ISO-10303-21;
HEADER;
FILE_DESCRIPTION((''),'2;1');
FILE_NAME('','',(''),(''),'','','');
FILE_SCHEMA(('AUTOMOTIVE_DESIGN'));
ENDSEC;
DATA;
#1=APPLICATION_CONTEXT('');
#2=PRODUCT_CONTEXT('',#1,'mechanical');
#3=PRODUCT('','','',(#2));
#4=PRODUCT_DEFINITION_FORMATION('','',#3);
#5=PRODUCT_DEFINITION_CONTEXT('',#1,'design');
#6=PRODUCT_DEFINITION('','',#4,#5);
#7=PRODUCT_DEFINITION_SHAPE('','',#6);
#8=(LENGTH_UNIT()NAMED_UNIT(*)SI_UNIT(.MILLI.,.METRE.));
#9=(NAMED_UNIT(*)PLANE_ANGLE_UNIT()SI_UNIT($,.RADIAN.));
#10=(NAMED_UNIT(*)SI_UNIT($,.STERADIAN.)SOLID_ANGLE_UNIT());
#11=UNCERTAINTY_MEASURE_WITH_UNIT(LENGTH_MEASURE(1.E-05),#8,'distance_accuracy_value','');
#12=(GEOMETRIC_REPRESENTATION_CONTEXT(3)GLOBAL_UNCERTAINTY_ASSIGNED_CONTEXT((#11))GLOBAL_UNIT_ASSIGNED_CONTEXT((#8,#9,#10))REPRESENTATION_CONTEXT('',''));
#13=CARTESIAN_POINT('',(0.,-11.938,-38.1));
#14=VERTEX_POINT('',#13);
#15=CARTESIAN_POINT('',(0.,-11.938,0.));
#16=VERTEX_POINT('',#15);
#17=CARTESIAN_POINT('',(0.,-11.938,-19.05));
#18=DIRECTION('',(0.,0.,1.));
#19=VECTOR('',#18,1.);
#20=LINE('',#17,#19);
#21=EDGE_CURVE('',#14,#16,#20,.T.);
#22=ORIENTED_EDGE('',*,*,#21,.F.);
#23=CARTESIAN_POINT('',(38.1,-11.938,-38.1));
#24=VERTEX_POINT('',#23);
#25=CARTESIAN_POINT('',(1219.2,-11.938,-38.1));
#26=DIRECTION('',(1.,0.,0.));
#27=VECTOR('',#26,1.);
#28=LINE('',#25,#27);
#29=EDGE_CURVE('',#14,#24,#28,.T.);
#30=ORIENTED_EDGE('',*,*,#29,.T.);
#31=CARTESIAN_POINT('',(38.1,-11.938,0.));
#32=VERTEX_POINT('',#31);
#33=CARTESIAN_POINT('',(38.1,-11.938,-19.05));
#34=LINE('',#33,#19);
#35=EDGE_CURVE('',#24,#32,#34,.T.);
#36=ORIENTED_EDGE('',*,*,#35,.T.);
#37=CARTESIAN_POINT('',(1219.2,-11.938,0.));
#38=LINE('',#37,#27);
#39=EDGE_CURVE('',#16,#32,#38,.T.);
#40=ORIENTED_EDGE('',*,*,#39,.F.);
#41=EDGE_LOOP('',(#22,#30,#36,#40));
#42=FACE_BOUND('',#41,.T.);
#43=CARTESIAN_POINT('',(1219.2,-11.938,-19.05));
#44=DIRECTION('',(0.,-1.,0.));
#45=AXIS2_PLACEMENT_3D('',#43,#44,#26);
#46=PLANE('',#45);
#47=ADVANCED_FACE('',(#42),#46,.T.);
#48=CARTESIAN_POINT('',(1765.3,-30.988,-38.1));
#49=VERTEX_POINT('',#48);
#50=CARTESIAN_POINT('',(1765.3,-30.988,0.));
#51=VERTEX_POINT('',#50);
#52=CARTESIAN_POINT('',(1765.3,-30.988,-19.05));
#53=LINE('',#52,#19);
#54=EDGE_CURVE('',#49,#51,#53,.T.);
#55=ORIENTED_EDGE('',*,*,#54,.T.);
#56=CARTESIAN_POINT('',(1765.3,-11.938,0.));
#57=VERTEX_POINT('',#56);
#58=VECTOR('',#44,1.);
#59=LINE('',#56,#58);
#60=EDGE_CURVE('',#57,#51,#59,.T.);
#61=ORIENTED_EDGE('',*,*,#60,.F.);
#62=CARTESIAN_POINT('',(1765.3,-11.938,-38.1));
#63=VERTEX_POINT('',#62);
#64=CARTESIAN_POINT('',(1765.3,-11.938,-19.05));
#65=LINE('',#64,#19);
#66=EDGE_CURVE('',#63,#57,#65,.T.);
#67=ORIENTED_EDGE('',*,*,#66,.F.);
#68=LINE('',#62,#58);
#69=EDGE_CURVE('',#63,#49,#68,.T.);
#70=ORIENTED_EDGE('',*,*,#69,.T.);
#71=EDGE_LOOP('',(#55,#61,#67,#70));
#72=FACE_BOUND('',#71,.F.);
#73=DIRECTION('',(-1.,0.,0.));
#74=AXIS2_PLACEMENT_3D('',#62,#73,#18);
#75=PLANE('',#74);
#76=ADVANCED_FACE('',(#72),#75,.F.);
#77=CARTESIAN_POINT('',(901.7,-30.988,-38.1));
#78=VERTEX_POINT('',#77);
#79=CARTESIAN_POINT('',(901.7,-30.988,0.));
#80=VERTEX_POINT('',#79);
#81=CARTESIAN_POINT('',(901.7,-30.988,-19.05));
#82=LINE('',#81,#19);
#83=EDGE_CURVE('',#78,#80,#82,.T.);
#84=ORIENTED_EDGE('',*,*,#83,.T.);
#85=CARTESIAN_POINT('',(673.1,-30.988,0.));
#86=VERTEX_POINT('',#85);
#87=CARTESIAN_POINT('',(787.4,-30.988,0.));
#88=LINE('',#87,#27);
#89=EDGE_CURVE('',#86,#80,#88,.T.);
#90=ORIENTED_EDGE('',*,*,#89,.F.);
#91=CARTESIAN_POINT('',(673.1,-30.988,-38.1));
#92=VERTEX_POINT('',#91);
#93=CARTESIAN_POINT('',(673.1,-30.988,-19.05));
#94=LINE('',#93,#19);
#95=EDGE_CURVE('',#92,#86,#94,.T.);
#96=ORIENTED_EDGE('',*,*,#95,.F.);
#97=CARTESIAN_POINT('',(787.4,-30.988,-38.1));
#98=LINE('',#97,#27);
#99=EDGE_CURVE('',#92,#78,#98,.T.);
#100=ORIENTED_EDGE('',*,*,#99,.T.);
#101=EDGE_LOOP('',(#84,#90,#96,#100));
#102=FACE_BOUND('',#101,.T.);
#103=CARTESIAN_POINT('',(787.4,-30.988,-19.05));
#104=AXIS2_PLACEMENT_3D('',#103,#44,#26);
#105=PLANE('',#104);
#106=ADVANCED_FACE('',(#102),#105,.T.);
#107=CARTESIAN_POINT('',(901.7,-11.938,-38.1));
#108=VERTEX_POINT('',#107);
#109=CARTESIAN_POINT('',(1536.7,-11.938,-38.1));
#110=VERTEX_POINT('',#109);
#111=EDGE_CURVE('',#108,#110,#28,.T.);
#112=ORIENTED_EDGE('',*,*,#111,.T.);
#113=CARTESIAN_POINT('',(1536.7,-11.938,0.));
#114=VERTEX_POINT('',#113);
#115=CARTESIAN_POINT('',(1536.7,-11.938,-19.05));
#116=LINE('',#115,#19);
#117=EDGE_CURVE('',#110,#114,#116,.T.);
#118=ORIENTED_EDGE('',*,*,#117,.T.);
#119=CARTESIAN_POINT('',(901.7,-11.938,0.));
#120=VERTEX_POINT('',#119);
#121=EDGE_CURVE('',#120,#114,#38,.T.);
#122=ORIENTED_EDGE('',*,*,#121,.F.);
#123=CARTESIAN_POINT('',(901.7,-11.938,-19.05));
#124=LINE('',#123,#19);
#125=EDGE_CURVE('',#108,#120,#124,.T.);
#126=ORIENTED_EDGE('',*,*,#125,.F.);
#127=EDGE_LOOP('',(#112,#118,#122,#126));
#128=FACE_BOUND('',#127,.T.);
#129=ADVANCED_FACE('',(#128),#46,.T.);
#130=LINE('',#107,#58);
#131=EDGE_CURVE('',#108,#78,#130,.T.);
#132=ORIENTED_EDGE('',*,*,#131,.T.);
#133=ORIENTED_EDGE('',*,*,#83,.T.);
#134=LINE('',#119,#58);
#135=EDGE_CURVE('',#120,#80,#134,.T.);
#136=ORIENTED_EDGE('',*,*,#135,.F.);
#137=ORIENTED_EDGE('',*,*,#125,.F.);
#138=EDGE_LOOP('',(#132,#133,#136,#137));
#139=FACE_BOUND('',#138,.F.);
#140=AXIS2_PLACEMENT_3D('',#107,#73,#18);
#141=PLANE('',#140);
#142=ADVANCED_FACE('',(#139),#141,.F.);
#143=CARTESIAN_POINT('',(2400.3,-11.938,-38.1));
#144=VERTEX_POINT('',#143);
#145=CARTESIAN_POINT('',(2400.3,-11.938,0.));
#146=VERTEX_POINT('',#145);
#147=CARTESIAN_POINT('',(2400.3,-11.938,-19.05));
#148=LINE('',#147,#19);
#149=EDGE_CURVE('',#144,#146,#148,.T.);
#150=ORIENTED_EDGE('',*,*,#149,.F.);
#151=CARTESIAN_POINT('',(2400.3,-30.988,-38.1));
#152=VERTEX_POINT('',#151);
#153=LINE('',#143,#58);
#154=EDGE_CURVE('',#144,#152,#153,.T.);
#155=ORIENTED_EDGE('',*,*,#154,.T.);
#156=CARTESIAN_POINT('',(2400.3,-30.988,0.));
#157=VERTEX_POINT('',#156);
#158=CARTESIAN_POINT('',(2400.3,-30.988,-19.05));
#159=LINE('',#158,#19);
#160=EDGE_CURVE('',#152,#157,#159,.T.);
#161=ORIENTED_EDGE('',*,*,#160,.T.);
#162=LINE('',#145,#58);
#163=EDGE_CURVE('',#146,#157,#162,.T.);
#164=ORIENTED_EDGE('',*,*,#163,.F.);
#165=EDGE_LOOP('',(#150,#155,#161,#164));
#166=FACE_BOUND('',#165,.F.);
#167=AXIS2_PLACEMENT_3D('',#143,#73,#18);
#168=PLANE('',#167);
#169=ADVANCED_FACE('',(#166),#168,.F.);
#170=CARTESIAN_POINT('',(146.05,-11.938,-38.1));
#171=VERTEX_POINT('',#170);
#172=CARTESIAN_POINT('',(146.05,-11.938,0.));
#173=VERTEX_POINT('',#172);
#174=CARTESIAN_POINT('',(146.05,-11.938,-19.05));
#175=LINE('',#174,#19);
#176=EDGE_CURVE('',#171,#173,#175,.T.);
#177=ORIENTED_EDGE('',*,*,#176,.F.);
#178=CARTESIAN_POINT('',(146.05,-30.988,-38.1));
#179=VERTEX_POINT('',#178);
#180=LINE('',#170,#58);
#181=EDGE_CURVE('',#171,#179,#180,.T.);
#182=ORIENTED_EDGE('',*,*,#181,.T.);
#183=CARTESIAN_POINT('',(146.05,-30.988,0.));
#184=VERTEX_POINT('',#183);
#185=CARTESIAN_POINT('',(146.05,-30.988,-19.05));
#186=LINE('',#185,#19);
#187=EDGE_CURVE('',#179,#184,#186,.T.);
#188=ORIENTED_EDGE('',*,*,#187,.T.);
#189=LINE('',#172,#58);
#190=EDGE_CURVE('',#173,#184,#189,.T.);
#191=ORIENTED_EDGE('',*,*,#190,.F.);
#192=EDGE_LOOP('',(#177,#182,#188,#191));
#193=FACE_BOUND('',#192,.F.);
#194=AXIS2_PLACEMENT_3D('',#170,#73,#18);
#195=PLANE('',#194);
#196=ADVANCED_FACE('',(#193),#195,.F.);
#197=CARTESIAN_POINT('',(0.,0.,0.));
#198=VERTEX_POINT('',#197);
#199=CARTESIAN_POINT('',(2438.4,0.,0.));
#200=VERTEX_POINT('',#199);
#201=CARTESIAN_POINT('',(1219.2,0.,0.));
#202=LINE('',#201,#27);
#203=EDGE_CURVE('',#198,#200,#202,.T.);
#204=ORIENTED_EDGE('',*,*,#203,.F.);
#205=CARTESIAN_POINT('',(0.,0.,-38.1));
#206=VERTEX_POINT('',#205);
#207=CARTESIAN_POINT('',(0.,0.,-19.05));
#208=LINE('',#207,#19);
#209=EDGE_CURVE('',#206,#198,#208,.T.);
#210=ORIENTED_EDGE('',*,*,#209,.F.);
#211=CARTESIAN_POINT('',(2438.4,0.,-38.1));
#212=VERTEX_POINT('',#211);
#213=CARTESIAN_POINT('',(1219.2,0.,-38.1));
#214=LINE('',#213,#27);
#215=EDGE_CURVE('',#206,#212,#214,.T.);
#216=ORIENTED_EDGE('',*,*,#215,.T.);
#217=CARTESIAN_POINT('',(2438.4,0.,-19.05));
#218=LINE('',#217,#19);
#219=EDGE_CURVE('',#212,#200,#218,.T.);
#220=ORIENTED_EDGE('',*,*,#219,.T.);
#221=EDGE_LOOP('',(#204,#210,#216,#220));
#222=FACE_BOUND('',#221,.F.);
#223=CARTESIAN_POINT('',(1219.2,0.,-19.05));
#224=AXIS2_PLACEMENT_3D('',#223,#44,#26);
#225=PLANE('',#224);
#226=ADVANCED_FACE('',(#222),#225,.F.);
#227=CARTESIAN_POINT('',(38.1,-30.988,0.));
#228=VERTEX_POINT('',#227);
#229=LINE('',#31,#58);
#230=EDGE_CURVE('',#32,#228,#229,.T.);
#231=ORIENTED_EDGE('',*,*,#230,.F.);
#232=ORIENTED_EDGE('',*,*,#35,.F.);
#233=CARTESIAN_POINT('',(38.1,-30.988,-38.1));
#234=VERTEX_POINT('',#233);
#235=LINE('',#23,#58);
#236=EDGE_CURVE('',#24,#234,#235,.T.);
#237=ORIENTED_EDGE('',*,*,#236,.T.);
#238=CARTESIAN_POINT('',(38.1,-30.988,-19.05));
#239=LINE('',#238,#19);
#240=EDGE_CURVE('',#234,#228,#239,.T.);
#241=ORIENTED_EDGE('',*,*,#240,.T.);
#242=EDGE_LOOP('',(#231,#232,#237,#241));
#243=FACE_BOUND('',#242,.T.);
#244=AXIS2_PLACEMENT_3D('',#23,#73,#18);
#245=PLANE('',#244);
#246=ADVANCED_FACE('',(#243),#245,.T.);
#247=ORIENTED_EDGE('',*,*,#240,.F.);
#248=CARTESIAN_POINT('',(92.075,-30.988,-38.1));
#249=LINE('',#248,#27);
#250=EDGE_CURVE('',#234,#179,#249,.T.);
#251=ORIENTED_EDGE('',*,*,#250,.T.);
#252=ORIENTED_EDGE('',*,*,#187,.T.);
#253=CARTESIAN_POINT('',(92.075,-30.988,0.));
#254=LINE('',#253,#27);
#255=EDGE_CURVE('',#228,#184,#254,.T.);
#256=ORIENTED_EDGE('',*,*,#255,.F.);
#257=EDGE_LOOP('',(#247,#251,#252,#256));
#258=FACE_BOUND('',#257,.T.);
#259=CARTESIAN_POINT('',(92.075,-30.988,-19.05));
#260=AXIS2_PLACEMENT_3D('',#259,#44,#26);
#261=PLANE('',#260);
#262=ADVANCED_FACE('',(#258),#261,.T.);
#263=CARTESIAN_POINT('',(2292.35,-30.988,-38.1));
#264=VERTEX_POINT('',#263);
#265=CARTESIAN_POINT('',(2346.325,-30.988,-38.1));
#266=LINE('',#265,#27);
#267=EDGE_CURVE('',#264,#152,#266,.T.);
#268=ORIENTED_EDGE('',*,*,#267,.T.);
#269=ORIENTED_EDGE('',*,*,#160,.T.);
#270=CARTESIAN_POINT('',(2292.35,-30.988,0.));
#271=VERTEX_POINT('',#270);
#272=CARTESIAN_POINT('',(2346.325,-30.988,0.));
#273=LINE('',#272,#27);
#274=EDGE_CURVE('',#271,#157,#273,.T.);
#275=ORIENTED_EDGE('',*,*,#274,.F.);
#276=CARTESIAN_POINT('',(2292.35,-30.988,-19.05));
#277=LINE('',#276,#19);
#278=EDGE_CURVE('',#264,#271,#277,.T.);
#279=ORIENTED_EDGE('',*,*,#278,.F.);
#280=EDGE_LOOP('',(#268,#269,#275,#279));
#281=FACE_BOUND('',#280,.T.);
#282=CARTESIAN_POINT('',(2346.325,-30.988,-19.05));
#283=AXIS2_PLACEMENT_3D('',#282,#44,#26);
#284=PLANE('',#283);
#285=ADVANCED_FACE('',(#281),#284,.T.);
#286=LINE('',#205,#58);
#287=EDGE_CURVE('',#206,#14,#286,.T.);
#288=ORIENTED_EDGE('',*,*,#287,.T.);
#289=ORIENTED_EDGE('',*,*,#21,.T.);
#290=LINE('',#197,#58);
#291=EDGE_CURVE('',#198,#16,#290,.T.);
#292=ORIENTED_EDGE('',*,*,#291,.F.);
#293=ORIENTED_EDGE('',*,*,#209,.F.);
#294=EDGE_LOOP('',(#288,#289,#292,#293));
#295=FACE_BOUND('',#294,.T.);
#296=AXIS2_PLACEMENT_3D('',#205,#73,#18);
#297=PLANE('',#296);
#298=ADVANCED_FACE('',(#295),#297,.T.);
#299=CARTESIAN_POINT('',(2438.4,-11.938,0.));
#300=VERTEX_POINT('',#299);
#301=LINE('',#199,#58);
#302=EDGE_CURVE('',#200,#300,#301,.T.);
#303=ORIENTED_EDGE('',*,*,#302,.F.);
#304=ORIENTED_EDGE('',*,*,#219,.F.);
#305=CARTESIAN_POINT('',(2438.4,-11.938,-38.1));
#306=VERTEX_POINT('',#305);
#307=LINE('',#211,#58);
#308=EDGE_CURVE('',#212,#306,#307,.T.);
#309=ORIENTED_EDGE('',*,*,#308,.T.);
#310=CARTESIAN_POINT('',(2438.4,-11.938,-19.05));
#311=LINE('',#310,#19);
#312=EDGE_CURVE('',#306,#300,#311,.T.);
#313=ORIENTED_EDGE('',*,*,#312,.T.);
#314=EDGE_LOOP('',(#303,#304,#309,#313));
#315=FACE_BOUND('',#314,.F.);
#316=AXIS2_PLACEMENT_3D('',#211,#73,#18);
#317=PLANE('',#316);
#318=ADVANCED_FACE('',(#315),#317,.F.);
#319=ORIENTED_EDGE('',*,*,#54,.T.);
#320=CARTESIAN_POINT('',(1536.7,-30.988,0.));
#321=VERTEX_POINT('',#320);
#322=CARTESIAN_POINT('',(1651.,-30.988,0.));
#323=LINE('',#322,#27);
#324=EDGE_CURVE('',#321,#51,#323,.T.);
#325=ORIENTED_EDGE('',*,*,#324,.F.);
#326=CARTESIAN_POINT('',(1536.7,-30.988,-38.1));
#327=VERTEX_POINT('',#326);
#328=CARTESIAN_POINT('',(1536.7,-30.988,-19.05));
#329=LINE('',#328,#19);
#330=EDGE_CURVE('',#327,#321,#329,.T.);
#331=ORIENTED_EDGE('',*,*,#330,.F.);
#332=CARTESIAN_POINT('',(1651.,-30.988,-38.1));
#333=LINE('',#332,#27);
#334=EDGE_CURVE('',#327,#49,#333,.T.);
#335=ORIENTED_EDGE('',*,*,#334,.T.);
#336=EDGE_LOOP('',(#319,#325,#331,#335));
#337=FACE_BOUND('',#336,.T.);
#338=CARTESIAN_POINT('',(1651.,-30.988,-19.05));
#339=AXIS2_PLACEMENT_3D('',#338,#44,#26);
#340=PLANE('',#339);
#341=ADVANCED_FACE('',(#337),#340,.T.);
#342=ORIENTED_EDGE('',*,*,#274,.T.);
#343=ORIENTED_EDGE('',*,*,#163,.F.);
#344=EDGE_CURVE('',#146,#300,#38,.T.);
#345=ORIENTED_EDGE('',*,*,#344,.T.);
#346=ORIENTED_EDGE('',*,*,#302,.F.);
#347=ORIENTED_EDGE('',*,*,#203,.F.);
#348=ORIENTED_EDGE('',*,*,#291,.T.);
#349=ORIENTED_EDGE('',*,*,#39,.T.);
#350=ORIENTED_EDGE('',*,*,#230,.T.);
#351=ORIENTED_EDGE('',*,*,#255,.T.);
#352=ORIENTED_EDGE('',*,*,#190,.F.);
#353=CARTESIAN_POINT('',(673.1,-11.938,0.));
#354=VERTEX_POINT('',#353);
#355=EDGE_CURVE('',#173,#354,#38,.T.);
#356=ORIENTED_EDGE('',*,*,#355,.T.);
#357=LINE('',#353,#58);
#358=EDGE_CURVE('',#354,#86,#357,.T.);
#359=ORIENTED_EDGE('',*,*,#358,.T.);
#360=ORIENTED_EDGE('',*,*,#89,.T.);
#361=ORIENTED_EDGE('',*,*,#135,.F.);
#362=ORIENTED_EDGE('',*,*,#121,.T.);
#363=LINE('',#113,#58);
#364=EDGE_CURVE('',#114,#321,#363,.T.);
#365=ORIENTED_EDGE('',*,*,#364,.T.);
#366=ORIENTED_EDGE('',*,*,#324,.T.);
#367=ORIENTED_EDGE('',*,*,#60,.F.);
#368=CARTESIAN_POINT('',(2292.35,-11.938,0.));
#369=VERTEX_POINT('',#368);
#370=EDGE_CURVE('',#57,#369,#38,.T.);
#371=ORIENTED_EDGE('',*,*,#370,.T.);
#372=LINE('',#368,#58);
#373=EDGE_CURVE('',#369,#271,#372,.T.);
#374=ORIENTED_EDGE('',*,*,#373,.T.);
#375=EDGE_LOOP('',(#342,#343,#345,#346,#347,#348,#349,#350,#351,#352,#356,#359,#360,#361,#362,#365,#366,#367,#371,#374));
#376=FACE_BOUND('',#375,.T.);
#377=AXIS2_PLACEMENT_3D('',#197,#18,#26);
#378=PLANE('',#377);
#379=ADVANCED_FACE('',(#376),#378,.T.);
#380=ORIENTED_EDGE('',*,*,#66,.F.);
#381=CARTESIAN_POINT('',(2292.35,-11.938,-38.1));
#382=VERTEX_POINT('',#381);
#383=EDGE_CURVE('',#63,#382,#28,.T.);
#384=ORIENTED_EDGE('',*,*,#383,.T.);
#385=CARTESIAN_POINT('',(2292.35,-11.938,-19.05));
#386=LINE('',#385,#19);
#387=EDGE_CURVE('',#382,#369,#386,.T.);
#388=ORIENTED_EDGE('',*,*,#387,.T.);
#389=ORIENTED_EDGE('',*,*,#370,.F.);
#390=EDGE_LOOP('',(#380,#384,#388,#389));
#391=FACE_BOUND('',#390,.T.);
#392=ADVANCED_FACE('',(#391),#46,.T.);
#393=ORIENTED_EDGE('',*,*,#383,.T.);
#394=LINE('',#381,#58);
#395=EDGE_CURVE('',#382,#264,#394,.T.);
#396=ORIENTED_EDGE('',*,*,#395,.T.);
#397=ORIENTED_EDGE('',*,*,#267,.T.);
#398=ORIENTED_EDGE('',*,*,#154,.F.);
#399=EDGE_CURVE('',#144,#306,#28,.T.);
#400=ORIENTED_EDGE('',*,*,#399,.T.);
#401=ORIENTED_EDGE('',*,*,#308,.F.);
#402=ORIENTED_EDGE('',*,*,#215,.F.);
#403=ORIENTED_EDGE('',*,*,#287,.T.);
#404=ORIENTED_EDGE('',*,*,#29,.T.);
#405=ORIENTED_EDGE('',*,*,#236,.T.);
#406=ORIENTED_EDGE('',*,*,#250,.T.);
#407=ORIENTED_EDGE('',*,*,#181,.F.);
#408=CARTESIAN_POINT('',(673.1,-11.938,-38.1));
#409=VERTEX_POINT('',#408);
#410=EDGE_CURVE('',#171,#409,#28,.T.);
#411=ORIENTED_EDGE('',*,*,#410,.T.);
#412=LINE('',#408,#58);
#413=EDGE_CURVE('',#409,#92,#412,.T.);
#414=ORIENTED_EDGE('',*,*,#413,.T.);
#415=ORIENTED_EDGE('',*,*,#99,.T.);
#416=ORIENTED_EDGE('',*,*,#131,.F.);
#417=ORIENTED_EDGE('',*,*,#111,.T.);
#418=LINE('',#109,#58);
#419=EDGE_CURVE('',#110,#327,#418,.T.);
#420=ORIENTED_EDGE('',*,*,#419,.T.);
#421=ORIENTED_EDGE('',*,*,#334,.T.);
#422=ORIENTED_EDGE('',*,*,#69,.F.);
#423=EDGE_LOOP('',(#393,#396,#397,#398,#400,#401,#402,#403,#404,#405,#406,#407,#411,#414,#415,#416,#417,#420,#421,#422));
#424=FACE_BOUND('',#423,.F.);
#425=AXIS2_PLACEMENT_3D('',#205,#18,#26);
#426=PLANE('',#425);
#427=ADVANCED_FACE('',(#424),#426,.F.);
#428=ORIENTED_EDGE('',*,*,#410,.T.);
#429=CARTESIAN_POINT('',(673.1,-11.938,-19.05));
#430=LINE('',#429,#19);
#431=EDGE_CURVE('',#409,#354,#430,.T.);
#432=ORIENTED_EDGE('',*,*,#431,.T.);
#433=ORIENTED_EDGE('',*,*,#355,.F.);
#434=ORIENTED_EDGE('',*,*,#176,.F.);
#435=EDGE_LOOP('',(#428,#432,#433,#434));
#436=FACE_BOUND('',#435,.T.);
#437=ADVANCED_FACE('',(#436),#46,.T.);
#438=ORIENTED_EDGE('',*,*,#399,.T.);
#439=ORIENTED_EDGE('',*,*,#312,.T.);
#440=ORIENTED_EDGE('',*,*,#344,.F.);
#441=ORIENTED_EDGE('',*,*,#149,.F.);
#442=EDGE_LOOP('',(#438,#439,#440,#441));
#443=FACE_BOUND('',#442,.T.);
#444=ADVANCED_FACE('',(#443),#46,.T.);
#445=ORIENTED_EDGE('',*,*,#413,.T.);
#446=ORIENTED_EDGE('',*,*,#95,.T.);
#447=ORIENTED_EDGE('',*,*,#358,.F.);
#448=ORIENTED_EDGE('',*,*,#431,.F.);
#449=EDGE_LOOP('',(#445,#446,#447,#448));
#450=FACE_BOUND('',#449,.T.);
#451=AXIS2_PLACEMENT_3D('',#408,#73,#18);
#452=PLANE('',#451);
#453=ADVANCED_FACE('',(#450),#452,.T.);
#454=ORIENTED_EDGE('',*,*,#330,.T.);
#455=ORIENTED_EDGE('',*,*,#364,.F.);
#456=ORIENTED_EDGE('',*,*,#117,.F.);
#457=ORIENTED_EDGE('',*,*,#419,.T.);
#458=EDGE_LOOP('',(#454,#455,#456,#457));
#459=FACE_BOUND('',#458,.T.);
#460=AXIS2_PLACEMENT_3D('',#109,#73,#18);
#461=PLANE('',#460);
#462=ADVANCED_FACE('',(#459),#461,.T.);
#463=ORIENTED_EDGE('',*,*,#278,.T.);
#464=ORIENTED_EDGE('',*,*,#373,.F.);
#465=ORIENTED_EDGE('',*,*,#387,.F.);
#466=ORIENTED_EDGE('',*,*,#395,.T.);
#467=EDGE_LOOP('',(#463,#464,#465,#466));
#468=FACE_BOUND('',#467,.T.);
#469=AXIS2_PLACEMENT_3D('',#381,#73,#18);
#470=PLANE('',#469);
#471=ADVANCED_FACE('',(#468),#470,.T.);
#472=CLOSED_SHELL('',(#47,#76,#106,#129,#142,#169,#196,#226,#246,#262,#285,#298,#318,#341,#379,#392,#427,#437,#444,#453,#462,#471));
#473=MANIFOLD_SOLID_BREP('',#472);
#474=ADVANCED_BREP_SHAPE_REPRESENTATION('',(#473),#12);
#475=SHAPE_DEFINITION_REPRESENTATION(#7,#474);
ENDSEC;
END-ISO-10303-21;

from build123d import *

# Parameters (mm, degrees)
F1_W     = 2438.4
F1_H     = 38.1
F2_DEPTH = 11.938
F3_W     = 107.95
F3_H     = 38.1
F3_W_2   = 228.6
F4_DEPTH = 19.05


# Not quite as in the source:
# - a variable given as a bare number and used for a length is read in inches; the dataset says mm whatever the document's units were


with BuildPart() as f2:
    # F1 (on Front) → F2 (new body)
    with BuildSketch(Plane.XZ):
        with Locations((1219.2, -19.05)):
            Rectangle(F1_W, F1_H)
    extrude(amount=F2_DEPTH)

    # F3 (on face) → F4 (join)
    with BuildSketch(Plane.XZ.offset(11.938)):
        with Locations((92.075, -19.05)):
            Rectangle(F3_W, F3_H)
        with Locations((2346.325, -19.05)):
            Rectangle(F3_W, F3_H)
        with Locations((787.4, -19.05)):
            Rectangle(F3_W_2, F3_H)
        with Locations((1651, -19.05)):
            Rectangle(F3_W_2, F3_H)
    extrude(amount=F4_DEPTH)


solid = f2.part
